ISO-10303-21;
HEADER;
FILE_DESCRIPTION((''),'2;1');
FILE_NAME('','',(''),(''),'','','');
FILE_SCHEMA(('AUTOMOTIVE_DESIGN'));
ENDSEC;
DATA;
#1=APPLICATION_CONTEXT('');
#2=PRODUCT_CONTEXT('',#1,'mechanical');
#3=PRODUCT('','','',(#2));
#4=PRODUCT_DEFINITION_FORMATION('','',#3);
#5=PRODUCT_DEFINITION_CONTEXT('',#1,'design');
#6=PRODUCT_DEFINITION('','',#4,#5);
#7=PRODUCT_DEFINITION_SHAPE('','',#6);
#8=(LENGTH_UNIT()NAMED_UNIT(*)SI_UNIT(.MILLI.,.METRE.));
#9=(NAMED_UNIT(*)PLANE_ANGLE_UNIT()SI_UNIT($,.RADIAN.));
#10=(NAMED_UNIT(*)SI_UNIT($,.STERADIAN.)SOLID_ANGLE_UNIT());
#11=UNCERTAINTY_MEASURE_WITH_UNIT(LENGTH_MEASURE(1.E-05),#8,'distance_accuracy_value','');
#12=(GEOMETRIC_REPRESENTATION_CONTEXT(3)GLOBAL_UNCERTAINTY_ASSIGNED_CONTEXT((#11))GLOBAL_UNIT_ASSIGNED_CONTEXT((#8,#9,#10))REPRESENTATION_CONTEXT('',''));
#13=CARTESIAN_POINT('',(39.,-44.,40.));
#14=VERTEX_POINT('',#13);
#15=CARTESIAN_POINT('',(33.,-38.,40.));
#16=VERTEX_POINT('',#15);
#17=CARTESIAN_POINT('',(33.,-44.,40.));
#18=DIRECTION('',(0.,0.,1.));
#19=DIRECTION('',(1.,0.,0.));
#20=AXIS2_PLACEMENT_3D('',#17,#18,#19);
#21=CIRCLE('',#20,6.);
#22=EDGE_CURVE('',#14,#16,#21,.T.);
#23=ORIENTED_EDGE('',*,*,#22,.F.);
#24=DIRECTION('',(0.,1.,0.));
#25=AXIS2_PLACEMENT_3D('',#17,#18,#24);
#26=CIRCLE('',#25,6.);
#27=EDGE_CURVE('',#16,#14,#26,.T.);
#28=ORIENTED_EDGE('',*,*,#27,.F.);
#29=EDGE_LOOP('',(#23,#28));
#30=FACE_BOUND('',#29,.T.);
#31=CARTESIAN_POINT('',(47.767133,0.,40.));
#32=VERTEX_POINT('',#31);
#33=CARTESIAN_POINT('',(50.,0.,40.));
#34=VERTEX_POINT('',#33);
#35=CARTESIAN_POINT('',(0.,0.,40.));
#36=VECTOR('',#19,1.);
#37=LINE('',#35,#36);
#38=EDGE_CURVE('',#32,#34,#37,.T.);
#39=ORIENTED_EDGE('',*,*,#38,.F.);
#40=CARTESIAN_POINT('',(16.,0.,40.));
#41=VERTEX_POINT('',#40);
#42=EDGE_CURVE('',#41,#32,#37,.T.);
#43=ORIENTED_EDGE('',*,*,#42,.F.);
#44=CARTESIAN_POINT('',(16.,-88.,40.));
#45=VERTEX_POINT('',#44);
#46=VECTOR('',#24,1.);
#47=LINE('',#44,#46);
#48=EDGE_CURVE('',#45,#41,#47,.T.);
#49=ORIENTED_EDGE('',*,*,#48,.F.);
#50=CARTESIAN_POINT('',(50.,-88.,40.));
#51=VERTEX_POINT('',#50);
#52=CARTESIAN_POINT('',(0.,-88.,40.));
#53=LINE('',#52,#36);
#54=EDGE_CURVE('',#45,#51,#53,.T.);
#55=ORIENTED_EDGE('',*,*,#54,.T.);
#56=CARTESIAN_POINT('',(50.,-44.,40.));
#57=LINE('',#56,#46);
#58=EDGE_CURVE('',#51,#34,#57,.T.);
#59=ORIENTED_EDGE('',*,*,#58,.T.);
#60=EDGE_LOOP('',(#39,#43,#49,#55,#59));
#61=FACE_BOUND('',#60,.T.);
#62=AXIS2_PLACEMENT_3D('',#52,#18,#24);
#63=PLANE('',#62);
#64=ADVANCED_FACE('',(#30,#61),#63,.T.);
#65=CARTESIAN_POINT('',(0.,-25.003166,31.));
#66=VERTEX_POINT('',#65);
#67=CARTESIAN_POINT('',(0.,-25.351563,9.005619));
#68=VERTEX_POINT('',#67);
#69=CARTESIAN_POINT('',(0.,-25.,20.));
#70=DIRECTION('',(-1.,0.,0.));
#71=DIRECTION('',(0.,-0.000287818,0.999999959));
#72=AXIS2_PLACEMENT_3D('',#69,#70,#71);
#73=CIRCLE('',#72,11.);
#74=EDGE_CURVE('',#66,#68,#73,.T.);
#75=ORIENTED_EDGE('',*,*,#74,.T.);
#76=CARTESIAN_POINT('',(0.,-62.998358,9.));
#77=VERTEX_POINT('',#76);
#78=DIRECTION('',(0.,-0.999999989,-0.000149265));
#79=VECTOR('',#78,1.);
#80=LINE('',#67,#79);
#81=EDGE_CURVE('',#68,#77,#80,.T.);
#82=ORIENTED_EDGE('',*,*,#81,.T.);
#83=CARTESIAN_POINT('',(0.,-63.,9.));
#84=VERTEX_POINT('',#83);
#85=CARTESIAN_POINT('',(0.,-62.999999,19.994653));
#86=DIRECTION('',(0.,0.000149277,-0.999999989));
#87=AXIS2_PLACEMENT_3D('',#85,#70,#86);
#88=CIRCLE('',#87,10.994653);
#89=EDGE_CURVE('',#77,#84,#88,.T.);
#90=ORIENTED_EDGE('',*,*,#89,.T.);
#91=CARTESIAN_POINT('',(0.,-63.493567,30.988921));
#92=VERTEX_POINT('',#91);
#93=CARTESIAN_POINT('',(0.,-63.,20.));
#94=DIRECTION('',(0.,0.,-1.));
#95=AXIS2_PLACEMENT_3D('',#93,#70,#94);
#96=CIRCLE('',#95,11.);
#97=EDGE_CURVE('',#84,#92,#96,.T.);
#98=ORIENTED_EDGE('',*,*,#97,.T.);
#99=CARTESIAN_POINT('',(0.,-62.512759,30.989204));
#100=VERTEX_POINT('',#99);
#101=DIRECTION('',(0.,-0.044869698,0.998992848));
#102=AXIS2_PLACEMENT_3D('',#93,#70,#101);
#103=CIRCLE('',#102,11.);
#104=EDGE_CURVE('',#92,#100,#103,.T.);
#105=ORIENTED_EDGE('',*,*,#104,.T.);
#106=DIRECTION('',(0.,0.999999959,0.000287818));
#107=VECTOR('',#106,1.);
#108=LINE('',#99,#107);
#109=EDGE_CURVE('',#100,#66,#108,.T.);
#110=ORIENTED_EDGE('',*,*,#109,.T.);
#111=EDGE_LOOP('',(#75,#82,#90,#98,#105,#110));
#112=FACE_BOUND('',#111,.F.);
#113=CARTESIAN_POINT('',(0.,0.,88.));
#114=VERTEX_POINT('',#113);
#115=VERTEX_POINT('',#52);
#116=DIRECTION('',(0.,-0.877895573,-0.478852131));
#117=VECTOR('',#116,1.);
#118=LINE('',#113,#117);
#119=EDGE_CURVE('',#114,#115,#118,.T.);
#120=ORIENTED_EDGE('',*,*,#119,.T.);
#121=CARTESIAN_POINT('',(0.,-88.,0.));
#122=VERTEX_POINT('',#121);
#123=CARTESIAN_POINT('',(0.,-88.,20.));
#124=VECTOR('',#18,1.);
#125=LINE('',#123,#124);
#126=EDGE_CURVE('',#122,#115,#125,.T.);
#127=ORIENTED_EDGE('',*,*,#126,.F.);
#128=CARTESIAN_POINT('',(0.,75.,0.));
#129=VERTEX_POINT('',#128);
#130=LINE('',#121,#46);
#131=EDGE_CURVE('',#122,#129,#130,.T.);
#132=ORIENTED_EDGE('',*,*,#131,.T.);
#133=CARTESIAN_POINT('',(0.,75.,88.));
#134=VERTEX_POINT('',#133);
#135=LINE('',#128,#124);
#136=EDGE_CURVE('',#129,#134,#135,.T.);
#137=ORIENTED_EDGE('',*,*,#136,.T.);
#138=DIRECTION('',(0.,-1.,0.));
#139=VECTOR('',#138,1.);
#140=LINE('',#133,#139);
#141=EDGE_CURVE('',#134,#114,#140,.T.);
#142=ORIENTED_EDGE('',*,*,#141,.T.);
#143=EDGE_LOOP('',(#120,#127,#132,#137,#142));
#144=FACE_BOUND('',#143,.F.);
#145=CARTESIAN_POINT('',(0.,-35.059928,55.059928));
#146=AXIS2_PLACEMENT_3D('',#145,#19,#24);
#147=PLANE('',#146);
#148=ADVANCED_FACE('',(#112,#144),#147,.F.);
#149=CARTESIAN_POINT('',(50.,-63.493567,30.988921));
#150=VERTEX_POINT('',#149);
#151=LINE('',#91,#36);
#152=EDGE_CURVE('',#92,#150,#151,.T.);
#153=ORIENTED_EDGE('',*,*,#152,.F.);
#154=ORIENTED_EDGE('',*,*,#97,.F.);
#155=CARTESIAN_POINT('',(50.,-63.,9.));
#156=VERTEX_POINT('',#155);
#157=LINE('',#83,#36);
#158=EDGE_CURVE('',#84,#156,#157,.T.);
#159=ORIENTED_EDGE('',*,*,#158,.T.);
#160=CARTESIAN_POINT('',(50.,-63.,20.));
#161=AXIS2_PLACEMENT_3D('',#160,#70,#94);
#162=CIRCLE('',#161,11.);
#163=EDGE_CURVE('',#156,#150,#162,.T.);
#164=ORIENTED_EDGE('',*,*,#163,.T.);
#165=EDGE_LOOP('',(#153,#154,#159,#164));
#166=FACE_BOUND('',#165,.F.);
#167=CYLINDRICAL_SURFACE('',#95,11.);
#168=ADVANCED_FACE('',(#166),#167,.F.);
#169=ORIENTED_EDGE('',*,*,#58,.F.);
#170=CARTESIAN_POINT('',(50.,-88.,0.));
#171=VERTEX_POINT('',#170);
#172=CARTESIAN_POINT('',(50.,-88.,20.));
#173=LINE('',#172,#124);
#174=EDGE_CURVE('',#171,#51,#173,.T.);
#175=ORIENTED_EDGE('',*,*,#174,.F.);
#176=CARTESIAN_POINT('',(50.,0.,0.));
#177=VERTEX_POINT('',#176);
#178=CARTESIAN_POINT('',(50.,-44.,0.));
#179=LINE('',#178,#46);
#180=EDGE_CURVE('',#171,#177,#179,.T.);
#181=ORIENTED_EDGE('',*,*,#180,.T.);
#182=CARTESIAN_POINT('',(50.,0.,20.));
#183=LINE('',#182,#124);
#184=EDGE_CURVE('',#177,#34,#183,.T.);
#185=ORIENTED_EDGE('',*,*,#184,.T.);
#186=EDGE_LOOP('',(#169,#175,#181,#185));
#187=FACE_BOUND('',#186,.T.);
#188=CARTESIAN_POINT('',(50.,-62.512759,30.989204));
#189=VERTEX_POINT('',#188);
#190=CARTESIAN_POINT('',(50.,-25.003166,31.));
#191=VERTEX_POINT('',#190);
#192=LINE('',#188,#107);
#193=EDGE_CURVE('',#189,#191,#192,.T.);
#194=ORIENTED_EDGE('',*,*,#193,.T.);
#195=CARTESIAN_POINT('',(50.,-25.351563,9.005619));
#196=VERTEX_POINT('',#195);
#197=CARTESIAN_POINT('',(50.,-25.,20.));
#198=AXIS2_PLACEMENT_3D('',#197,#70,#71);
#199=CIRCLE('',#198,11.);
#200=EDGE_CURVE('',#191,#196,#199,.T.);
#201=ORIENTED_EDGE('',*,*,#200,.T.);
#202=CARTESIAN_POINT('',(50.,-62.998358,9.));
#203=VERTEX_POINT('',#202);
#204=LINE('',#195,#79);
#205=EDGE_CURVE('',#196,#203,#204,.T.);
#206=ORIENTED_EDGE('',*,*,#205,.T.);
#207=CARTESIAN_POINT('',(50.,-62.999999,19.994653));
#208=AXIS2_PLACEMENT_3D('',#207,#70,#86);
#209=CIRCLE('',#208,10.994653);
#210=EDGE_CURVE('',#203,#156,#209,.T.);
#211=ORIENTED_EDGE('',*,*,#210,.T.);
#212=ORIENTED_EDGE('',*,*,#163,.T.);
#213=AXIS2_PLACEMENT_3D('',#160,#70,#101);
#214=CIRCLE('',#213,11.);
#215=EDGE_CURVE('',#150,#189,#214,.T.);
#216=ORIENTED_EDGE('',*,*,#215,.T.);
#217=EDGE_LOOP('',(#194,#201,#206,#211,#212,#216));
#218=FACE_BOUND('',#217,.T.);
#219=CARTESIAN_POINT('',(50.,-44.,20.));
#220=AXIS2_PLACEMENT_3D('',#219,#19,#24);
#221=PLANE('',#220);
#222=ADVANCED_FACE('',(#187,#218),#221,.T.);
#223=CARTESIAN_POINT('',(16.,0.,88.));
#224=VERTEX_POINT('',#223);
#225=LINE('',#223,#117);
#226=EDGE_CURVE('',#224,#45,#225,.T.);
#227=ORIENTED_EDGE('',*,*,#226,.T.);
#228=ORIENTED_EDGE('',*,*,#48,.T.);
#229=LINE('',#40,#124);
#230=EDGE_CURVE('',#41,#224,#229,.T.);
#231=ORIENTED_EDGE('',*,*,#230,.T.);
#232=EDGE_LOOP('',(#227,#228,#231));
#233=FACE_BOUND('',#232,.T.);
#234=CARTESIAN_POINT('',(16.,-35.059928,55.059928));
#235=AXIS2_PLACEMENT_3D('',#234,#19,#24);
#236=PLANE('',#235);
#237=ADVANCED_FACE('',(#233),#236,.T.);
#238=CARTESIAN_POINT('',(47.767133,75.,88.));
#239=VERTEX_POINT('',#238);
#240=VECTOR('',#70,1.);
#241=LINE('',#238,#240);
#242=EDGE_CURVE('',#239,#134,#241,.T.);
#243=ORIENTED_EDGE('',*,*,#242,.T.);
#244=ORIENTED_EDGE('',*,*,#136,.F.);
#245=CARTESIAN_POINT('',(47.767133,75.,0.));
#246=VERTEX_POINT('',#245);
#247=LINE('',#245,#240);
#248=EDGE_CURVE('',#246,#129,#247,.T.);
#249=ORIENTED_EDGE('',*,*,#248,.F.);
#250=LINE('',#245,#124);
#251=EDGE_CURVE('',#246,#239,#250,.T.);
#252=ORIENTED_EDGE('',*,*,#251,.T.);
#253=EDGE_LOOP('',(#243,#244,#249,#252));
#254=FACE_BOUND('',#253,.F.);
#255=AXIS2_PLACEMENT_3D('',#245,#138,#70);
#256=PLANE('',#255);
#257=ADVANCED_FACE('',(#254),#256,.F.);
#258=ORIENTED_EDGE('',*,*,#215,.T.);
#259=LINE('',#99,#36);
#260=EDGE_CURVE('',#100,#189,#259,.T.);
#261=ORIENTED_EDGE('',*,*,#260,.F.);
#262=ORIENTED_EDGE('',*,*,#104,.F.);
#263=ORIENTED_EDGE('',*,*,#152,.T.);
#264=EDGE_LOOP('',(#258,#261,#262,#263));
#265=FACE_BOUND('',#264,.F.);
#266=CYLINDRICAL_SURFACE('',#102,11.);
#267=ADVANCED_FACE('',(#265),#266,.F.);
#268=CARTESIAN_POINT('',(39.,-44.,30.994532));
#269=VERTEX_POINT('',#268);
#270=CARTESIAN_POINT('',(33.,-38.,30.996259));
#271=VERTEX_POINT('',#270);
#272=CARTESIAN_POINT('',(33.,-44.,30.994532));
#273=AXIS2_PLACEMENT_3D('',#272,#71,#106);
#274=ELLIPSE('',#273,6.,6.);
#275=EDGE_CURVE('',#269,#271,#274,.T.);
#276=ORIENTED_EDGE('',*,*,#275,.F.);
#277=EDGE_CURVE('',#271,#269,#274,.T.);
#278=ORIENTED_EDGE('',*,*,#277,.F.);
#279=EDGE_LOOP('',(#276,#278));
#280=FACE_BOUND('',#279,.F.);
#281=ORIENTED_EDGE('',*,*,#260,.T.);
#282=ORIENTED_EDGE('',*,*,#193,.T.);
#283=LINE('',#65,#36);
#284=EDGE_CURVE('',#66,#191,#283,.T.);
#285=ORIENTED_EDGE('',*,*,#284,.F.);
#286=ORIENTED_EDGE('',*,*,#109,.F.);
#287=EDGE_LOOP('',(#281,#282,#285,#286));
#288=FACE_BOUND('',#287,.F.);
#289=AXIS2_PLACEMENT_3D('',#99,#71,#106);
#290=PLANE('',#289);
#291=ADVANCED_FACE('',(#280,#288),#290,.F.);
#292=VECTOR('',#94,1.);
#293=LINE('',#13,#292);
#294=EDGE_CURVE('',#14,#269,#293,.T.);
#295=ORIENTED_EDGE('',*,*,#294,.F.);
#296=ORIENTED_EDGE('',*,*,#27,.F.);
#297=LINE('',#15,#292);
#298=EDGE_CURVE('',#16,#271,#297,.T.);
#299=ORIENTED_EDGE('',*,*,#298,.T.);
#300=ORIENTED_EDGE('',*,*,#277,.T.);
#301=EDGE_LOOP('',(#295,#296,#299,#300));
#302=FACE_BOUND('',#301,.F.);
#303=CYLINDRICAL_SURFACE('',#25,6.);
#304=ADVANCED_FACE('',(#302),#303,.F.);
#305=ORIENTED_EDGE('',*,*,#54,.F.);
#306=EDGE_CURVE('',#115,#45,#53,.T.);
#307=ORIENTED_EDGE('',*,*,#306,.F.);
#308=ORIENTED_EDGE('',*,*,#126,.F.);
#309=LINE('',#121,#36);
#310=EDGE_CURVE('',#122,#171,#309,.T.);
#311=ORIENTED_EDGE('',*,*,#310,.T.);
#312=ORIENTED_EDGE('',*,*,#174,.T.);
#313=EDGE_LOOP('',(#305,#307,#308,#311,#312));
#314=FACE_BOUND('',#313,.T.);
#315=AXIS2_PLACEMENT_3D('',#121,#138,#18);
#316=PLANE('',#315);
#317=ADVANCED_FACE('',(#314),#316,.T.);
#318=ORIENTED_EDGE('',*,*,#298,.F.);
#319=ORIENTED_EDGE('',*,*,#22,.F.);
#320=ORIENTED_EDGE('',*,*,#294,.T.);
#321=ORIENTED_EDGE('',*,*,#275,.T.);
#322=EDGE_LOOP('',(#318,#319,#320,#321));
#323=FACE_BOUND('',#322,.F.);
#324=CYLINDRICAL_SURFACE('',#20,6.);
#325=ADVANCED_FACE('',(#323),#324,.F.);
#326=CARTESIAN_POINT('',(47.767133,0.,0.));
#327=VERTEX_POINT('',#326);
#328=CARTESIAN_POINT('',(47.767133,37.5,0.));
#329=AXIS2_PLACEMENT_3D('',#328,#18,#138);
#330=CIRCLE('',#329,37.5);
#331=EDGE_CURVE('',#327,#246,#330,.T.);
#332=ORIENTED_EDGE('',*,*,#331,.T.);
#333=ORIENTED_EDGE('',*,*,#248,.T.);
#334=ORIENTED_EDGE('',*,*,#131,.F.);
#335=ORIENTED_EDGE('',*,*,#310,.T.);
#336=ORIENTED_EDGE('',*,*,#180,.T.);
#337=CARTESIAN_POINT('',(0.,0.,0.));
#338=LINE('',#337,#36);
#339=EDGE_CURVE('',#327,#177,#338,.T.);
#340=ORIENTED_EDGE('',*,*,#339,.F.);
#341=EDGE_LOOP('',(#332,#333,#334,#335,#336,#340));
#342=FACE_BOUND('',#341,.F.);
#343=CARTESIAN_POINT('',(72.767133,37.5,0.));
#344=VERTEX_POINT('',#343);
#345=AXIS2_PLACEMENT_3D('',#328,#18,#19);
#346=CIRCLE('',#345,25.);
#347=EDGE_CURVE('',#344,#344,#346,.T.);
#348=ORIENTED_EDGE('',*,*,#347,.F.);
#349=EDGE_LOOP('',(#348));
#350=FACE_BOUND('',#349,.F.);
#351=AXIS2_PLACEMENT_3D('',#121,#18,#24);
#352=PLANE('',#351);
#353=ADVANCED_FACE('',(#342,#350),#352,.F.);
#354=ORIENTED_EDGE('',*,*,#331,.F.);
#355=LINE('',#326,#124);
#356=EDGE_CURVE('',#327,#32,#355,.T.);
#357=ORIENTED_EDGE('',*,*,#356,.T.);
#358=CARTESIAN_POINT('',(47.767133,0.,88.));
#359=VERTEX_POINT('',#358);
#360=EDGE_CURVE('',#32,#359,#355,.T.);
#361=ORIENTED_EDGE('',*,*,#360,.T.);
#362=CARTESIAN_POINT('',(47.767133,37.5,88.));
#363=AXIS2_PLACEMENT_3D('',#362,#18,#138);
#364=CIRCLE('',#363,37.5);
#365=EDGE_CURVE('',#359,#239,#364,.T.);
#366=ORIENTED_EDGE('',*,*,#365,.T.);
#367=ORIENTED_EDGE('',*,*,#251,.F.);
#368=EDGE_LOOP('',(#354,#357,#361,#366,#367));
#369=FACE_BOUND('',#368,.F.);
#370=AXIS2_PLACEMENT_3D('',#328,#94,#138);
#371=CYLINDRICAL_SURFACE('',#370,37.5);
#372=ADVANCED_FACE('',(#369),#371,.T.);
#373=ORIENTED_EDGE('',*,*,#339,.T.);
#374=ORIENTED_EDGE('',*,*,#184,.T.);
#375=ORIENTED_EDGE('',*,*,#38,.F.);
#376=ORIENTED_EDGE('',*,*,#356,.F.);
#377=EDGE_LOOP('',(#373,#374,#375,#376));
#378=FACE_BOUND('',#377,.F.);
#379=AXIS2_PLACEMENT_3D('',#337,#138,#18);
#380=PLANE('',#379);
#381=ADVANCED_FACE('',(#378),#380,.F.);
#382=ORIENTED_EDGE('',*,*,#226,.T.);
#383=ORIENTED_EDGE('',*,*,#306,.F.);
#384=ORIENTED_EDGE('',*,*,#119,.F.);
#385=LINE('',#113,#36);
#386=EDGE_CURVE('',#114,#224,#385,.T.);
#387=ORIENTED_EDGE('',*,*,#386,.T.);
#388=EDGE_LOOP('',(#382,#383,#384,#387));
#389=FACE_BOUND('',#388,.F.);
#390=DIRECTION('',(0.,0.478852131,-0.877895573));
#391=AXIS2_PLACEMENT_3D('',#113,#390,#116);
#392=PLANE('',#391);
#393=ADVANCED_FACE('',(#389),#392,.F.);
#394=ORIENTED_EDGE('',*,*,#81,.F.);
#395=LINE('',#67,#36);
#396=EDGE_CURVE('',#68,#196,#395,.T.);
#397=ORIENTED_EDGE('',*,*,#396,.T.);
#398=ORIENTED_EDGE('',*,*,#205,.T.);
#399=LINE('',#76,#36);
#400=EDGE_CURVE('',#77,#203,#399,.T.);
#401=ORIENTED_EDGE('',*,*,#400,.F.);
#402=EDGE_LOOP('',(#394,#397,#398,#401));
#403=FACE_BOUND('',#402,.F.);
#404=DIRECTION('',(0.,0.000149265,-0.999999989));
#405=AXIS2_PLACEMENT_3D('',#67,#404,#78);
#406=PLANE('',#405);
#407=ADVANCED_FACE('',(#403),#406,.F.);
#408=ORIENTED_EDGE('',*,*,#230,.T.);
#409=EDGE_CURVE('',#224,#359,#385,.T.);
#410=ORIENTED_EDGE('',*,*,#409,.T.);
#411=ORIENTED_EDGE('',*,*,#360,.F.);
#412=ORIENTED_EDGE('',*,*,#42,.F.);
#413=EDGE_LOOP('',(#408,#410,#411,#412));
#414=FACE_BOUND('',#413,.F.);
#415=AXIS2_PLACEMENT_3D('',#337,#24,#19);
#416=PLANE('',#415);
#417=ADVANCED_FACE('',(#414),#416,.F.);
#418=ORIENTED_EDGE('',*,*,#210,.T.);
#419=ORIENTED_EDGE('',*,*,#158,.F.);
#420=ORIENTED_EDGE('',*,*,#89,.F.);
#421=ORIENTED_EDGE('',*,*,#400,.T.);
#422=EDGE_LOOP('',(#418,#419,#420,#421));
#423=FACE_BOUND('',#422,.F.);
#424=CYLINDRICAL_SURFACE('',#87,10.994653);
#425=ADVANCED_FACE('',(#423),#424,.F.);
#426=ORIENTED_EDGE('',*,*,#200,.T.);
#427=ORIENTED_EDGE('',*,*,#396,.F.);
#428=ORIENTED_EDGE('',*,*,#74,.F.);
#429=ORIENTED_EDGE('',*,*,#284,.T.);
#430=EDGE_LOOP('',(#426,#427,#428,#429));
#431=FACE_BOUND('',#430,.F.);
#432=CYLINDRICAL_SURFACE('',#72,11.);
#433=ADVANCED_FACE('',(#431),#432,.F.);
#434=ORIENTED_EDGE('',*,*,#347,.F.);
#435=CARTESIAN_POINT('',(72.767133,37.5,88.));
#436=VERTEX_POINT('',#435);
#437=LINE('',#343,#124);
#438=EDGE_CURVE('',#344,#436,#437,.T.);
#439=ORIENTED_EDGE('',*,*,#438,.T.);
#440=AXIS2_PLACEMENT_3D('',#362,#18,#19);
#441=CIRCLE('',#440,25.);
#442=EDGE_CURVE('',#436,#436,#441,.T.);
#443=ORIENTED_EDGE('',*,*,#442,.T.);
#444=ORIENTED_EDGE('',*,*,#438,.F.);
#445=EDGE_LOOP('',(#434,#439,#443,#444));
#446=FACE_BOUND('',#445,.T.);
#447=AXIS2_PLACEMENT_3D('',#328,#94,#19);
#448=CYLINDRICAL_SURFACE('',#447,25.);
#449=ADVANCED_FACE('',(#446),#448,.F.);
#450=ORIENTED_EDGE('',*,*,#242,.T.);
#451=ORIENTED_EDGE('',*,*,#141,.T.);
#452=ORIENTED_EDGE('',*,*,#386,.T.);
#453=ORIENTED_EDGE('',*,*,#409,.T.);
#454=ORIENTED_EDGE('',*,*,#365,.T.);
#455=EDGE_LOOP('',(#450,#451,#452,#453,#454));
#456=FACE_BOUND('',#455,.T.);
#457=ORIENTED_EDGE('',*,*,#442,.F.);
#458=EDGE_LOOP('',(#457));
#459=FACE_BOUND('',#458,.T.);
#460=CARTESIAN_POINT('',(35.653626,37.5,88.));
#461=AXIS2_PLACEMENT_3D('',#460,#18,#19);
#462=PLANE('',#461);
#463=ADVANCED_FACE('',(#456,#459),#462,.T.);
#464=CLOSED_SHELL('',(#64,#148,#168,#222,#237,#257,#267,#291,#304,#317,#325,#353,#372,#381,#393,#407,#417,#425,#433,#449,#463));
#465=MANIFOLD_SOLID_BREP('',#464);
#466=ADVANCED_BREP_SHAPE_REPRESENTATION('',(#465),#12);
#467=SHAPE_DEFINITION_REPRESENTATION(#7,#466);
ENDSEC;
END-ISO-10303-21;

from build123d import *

# Parameters (mm, degrees)
F0_R     = 25
F1_DEPTH = 88
F2_W     = 88
F2_H     = 40
F3_DEPTH = 50
F5_DEPTH = 16
F7_DEPTH = 9.008194986


with BuildPart() as f1:
    # F0 (on Top) → F1 (new body)
    with BuildSketch(Plane.XY):
        with BuildLine():
            Line((0, 75), (0, 0))
            Line((0, 0), (47.7671325207, 0))
            ThreePointArc((47.7671325207, 0), (85.2671325207, 37.5), (47.7671325207, 75))
            Line((47.7671325207, 75), (0, 75))
        make_face()
        with Locations((47.7671325207, 37.5)):
            Circle(F0_R, mode=Mode.SUBTRACT)
    extrude(amount=F1_DEPTH)

    # F2 (on Right) → F3 (join)
    with BuildSketch(Plane.YZ):
        with Locations((-44, 20)):
            Rectangle(F2_W, F2_H)
        with BuildLine():
            ThreePointArc((-63.4935666774, 30.9889213272), (-63.0031659942, 30.9999995444), (-62.5127590152, 30.989203621))
            Line((-62.5127590152, 30.989203621), (-25.0031659942, 30.9999995444))
            ThreePointArc((-25.0031659942, 30.9999995444), (-14.0013797727, 19.8257786016), (-25.3515634815, 9.0056194755))
            Line((-25.3515634815, 9.0056194755), (-62.9983580838, 9.0000001225))
            ThreePointArc((-62.9983580838, 9.0000001225), (-62.9991790419, 9.0000000306), (-63, 9))
            ThreePointArc((-63, 9), (-73.997229983, 19.7531545007), (-63.4935666774, 30.9889213272))
        make_face(mode=Mode.SUBTRACT)
    extrude(amount=F3_DEPTH)

    # F4 (on Right) → F5 (join)
    with BuildSketch(Plane.YZ):
        Polygon((-88, 40), (0, 40), (0, 88), align=None)
    extrude(amount=F5_DEPTH)

    # F6 (on face) → F7 (cut, through all)
    with BuildSketch(Plane.XY.offset(40)):
        with BuildLine():
            ThreePointArc((39, -44), (37.2426406871, -39.7573593129), (33, -38))
            ThreePointArc((33, -38), (28.7573593129, -48.2426406871), (39, -44))
        make_face()
    extrude(amount=-F7_DEPTH, mode=Mode.SUBTRACT)


solid = f1.part
